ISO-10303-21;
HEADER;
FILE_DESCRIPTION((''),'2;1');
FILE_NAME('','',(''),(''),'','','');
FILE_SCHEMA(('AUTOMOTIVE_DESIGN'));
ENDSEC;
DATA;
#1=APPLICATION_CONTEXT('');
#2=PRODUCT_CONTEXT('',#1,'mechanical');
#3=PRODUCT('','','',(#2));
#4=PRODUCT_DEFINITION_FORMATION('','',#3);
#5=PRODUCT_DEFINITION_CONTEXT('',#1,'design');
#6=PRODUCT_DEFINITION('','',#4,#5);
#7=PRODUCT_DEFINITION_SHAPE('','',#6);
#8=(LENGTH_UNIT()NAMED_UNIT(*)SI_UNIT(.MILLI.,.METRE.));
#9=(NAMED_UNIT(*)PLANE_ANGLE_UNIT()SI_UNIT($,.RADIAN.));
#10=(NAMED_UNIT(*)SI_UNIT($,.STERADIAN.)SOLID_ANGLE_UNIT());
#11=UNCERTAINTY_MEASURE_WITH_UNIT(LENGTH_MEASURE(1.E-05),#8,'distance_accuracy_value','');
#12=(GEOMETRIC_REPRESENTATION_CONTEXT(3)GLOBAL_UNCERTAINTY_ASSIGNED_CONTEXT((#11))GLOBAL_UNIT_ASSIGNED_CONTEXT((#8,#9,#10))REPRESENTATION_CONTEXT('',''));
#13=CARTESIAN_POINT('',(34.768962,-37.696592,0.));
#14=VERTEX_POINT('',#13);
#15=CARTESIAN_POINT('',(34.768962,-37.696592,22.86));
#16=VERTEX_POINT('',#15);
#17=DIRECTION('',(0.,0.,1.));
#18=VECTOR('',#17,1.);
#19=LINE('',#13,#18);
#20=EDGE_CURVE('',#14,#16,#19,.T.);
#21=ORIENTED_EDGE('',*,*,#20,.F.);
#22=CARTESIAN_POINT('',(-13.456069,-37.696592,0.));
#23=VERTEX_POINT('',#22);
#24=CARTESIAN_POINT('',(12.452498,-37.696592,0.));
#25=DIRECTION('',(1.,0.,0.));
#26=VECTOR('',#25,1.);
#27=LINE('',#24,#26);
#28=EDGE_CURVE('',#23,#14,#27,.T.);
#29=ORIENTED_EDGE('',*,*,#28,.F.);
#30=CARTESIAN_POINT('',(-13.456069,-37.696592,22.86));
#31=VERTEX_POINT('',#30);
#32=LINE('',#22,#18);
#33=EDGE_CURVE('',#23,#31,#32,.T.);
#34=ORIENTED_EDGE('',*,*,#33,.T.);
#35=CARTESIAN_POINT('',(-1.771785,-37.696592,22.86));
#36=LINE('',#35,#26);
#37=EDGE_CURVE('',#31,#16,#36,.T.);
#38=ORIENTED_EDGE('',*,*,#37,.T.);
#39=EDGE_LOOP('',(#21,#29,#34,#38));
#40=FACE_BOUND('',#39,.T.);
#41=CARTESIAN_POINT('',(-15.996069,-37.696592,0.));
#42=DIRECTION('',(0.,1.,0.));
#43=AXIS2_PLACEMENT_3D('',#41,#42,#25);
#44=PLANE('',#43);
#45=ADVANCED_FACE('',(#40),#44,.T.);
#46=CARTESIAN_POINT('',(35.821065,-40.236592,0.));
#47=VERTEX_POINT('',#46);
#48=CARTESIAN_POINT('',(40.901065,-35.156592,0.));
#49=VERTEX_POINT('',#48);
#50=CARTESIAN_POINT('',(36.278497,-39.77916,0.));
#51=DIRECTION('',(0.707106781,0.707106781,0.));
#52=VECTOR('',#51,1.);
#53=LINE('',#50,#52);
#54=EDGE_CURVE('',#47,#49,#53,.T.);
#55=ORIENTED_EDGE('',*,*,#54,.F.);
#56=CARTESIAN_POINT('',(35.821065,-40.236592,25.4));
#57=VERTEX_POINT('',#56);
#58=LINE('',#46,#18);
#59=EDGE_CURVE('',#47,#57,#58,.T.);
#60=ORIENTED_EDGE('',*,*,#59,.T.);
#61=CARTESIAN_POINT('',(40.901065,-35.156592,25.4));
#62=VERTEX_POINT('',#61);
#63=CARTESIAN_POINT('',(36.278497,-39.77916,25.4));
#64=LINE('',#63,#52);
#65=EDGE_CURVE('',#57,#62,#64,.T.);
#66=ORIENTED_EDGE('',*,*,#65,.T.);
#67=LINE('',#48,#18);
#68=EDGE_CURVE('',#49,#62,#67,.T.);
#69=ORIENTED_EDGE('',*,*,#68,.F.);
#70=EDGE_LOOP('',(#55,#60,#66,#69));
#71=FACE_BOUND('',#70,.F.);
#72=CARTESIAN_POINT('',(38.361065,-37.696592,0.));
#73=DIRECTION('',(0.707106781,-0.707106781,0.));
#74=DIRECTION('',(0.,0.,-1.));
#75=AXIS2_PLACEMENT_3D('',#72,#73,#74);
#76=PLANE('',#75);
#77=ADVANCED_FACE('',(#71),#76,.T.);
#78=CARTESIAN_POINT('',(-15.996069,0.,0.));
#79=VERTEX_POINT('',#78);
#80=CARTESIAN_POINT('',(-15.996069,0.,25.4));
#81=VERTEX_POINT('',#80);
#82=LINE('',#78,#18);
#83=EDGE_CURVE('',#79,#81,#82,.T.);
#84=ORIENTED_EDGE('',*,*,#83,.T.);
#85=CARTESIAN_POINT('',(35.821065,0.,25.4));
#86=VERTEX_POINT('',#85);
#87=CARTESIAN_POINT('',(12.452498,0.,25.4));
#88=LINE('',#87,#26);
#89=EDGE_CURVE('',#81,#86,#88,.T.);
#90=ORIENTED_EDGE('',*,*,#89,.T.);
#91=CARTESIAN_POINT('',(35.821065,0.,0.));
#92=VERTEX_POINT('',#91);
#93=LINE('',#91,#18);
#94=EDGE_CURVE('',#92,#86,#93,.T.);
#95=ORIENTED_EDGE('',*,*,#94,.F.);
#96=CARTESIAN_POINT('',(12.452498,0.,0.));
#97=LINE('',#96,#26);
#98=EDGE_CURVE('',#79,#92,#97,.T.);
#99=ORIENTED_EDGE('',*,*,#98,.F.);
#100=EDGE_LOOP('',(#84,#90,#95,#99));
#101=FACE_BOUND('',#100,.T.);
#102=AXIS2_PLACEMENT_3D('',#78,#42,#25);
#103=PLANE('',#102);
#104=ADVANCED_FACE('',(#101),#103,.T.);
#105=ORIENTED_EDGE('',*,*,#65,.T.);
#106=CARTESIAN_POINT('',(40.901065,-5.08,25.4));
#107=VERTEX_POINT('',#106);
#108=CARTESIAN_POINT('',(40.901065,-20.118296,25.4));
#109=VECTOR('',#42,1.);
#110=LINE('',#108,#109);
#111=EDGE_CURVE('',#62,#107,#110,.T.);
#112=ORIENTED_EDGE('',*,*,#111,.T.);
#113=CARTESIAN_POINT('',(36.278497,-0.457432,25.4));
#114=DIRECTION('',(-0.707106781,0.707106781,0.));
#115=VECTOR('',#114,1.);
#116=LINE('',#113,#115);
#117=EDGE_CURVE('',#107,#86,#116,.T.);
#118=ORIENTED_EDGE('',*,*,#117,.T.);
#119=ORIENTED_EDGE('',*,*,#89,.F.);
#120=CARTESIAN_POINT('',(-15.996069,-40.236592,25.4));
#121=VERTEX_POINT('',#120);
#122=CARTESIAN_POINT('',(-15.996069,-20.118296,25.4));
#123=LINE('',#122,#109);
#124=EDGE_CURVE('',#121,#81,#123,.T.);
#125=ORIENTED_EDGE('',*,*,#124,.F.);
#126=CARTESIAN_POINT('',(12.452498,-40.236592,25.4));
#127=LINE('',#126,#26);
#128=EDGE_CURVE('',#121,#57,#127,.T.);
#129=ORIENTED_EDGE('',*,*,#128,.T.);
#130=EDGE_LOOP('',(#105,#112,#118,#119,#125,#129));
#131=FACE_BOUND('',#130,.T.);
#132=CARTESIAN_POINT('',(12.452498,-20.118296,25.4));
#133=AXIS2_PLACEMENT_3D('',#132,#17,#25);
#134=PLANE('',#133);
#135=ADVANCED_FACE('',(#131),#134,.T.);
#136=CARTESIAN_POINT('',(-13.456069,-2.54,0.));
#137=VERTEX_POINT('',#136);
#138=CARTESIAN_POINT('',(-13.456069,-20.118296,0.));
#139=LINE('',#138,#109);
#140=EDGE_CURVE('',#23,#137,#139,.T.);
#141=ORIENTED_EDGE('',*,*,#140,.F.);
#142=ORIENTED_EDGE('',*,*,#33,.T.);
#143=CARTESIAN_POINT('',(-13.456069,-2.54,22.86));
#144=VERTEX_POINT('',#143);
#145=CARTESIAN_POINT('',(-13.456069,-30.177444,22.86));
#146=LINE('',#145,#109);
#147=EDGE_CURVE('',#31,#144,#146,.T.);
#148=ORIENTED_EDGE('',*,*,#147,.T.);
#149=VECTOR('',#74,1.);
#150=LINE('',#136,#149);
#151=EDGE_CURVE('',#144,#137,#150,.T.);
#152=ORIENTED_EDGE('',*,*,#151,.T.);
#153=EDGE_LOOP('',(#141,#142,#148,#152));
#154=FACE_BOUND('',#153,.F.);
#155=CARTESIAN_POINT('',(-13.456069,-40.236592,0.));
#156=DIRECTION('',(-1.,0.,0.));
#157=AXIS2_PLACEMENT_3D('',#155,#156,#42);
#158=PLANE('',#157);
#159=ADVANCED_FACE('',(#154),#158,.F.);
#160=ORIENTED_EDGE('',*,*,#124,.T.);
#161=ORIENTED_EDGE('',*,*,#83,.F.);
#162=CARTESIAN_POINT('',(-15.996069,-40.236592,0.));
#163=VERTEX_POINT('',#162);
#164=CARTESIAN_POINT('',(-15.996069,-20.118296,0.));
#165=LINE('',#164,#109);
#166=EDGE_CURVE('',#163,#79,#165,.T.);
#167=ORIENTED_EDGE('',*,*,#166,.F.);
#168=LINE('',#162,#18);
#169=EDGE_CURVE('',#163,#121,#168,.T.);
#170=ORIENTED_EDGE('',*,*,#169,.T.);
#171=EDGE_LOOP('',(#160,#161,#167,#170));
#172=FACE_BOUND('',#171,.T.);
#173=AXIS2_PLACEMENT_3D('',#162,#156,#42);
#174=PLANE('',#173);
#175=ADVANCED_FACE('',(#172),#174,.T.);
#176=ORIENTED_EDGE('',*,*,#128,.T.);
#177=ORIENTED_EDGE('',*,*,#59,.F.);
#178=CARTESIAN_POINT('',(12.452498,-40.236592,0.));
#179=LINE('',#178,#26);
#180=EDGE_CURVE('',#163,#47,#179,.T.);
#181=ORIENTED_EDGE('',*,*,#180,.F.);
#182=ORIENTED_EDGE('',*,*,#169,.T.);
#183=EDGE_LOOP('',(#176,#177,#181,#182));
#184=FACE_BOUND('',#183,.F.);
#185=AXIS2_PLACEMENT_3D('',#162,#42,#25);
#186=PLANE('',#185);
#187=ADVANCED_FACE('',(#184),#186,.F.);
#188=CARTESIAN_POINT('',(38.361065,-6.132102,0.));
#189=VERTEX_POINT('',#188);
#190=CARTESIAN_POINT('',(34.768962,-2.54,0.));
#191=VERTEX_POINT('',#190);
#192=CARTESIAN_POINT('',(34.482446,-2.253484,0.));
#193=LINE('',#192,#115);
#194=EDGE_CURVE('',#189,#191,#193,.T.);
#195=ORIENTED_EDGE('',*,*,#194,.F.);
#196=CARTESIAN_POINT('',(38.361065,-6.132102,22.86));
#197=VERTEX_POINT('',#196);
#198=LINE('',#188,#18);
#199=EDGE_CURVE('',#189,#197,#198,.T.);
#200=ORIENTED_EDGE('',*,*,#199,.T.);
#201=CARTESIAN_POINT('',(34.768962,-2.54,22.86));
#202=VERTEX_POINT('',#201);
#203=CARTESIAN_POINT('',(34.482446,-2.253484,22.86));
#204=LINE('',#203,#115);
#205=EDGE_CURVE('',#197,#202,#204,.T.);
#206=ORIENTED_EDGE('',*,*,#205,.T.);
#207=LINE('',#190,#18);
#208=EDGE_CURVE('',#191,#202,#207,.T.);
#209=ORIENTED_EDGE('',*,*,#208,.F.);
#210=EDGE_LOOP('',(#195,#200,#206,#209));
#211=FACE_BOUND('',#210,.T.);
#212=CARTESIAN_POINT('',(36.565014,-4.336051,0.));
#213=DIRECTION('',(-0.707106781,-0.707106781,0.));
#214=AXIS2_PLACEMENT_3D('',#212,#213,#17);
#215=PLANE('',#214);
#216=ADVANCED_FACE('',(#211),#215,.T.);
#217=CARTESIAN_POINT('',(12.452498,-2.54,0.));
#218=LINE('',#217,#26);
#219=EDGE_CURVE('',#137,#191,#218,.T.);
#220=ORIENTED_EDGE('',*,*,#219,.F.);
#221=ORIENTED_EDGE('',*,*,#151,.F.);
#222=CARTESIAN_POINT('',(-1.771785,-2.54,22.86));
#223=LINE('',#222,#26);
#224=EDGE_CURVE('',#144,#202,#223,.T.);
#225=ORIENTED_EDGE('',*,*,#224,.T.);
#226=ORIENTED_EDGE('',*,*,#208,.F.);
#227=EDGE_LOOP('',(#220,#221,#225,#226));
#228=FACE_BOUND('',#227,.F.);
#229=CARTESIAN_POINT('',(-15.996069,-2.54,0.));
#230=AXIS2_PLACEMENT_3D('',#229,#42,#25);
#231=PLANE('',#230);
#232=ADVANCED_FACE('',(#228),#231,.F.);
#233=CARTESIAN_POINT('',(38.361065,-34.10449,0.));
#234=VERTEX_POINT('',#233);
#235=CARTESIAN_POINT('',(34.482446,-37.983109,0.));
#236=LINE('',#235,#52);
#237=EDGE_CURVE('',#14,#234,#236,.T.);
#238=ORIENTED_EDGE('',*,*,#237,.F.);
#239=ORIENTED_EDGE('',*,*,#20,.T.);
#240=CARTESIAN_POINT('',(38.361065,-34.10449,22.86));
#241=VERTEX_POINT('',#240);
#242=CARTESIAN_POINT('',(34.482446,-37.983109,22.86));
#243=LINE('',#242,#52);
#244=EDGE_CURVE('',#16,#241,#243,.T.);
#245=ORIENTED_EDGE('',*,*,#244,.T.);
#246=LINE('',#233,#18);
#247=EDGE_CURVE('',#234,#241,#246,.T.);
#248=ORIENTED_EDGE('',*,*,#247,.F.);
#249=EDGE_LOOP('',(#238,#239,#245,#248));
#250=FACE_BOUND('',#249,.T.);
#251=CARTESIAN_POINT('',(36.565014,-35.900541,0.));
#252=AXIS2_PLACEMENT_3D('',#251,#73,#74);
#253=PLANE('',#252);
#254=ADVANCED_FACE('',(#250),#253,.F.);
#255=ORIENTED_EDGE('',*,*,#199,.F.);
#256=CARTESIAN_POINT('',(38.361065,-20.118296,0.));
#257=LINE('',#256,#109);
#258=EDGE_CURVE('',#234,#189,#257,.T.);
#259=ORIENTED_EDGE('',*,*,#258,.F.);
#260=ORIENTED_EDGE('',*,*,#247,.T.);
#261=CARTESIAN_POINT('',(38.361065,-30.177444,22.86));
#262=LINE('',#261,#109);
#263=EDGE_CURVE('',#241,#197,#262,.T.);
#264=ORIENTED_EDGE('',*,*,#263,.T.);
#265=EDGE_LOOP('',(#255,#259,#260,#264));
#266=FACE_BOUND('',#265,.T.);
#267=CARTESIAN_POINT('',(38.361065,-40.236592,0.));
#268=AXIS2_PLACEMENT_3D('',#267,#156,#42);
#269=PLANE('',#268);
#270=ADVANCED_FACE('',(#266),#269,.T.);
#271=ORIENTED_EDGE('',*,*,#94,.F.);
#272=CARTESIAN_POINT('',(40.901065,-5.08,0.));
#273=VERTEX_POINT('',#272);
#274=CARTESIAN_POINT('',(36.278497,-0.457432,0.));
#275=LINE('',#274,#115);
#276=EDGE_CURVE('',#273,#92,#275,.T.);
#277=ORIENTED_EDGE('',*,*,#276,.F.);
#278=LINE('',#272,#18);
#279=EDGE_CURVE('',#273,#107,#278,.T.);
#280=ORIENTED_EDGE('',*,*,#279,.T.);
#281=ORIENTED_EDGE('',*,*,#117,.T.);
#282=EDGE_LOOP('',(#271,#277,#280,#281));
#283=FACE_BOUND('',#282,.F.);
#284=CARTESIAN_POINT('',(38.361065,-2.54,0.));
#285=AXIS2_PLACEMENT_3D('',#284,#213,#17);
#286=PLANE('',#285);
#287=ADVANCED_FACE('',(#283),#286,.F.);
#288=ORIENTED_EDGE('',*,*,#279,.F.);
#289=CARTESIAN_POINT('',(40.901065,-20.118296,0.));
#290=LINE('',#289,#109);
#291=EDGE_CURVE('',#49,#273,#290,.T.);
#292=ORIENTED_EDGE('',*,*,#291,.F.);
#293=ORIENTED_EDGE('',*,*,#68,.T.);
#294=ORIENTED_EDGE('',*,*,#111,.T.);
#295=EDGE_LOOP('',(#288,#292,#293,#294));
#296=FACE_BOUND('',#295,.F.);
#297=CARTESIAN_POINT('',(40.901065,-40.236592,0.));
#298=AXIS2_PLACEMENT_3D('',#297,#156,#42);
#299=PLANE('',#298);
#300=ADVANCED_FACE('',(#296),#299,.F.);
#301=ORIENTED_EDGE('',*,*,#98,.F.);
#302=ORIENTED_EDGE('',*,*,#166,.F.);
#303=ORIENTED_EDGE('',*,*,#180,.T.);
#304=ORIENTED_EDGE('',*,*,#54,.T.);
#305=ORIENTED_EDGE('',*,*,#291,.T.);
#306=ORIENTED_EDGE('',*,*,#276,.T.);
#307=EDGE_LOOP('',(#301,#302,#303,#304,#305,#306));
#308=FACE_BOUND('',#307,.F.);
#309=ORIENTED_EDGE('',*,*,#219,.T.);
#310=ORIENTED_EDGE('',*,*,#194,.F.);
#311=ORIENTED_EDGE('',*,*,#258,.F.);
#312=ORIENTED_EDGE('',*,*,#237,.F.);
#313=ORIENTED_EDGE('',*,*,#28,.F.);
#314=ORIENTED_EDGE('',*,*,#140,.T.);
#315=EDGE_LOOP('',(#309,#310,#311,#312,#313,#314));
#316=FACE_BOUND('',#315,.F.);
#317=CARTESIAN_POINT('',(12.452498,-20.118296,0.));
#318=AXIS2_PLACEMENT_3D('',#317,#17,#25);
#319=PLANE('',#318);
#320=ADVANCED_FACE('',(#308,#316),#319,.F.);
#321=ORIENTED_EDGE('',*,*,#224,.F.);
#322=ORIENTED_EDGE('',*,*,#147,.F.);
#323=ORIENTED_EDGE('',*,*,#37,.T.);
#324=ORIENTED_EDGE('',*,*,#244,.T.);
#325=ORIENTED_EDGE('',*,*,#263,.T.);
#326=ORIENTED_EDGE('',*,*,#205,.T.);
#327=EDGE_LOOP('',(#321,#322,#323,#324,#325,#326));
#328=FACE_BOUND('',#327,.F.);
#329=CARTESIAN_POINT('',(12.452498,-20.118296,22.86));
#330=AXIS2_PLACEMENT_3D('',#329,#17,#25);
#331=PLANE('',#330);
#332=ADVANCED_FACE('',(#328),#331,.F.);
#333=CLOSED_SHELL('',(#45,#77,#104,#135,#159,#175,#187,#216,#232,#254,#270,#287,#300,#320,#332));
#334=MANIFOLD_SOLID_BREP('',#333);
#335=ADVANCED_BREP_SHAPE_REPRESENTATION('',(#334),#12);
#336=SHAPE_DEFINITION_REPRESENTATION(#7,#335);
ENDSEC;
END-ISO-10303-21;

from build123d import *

# Parameters (mm, degrees)
F0_W     = 56.8971335888
F0_H     = 40.2365922928
F1_DEPTH = 25.4
F2_SIZE  = 5.08
F5_T     = -2.54


# Not quite as in the source:
# - the program builds the solid bodies; features that only make, move or delete a surface that nothing else refers to are left out


with BuildPart() as f1:
    # F0 (on Top) → F1 (new body)
    with BuildSketch(Plane.XY):
        with Locations((12.4524980783, -20.1182961464)):
            Rectangle(F0_W, F0_H)
    extrude(amount=F1_DEPTH)

    # F2
    f2_edges = [f1.edges().sort_by_distance(p)[0] for p in [
        (40.901065, -40.236592, 12.7),
        (40.901065, 0, 12.7),
    ]]
    chamfer(f2_edges, length=F2_SIZE)

    # F5
    f5_openings = [f1.faces().sort_by_distance(p)[0] for p in [
        (12.147464, -20.118296, 0),
    ]]
    offset(amount=F5_T, openings=f5_openings)


solid = f1.part
